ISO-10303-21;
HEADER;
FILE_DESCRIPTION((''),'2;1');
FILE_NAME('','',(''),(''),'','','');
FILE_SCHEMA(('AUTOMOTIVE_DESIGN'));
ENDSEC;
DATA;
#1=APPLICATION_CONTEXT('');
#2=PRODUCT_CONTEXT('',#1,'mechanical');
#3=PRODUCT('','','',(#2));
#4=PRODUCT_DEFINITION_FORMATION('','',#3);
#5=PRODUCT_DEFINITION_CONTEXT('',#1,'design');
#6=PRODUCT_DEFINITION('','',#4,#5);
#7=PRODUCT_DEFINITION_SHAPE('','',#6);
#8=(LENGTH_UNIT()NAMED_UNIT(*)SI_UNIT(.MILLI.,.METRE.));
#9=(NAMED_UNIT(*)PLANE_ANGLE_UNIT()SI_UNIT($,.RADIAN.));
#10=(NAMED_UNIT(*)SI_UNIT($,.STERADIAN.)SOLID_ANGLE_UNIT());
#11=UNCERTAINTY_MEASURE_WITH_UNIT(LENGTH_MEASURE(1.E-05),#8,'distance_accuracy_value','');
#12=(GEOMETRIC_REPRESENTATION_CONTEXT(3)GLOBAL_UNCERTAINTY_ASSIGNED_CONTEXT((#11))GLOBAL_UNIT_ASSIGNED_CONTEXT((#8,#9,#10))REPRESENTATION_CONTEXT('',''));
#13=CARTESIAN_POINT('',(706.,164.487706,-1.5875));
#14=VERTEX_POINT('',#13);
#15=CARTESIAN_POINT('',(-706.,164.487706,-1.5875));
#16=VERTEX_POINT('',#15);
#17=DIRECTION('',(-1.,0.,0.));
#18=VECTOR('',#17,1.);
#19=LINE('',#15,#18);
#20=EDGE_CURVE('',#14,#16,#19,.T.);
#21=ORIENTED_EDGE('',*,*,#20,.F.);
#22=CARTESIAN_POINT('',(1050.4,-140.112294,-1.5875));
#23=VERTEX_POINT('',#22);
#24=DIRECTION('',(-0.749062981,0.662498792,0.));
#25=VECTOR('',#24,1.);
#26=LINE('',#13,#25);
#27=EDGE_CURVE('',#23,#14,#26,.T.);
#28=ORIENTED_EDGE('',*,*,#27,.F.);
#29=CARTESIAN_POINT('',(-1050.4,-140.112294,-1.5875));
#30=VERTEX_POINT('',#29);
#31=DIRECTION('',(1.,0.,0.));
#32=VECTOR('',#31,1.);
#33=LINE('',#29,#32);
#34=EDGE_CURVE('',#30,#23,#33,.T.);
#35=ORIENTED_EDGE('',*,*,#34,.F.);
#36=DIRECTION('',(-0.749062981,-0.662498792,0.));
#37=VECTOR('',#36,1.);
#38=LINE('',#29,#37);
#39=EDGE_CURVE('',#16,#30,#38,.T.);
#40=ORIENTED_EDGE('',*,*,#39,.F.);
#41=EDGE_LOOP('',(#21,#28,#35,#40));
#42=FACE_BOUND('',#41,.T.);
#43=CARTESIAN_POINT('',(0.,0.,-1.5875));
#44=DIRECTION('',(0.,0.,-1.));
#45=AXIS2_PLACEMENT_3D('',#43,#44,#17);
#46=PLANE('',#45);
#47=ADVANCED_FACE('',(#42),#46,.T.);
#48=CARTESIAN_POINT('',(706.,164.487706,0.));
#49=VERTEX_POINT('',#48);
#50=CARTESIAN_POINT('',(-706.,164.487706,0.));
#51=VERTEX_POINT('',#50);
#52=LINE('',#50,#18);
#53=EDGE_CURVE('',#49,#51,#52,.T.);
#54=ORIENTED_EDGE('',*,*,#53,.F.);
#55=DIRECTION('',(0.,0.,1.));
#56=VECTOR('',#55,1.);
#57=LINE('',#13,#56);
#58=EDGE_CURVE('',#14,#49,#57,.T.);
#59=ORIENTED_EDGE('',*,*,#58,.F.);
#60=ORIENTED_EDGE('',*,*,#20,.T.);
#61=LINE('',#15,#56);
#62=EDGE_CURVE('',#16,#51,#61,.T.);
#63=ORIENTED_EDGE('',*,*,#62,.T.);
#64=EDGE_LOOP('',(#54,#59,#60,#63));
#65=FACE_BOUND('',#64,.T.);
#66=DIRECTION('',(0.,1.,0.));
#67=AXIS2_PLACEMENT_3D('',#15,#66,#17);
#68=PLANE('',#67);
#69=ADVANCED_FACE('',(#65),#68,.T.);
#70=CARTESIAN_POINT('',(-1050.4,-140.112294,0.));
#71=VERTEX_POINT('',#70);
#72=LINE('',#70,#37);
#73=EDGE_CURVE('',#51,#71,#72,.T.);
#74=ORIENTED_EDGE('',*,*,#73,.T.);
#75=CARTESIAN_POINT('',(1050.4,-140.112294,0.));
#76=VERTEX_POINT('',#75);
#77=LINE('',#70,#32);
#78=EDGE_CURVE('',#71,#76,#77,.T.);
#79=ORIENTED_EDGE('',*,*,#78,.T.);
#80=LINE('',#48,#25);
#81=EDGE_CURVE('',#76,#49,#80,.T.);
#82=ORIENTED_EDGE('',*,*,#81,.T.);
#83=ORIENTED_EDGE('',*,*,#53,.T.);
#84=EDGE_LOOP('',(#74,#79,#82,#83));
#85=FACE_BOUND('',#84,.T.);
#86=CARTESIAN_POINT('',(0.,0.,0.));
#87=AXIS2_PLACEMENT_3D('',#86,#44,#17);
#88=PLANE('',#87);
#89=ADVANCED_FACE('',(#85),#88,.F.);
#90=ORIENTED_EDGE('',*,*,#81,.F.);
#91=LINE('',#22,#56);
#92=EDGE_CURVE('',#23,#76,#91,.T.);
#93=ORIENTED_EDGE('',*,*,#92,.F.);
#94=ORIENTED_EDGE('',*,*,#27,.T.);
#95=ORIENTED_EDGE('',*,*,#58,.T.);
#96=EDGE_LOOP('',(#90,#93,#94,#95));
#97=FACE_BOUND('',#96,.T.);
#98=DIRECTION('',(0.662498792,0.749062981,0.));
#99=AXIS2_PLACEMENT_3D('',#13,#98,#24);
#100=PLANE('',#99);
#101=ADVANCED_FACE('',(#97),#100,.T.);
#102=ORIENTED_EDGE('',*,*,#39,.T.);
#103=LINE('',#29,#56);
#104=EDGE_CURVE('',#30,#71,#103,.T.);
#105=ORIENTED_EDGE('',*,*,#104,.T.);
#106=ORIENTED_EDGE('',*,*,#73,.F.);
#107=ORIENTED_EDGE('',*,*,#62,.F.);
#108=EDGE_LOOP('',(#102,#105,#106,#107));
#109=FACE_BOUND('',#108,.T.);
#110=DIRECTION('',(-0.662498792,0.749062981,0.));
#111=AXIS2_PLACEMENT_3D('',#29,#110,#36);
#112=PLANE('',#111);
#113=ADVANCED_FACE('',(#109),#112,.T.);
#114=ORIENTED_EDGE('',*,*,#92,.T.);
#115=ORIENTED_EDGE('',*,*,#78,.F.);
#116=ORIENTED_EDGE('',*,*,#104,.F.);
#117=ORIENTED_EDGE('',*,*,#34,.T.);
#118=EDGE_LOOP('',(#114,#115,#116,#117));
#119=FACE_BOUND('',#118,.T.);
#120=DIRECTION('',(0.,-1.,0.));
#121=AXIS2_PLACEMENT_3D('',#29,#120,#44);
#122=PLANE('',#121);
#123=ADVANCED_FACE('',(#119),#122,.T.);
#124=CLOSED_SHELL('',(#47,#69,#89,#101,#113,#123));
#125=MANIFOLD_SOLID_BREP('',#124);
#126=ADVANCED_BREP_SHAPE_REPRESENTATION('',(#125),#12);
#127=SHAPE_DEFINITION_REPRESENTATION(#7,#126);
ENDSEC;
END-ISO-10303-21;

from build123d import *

# Parameters (mm, degrees)
BRIDA_BASE1_DEPTH = 1.5875


# Sheet-metal steps are written as plain solids
with BuildPart() as part:
    # Croquis1 → Brida base1 (new body)
    with BuildSketch(Plane.XY):
        Polygon((-1050.4, -140.112293651), (-706, 164.487706349), (706, 164.487706349), (1050.4, -140.112293651), align=None)
    extrude(amount=-BRIDA_BASE1_DEPTH)


solid = part.part
